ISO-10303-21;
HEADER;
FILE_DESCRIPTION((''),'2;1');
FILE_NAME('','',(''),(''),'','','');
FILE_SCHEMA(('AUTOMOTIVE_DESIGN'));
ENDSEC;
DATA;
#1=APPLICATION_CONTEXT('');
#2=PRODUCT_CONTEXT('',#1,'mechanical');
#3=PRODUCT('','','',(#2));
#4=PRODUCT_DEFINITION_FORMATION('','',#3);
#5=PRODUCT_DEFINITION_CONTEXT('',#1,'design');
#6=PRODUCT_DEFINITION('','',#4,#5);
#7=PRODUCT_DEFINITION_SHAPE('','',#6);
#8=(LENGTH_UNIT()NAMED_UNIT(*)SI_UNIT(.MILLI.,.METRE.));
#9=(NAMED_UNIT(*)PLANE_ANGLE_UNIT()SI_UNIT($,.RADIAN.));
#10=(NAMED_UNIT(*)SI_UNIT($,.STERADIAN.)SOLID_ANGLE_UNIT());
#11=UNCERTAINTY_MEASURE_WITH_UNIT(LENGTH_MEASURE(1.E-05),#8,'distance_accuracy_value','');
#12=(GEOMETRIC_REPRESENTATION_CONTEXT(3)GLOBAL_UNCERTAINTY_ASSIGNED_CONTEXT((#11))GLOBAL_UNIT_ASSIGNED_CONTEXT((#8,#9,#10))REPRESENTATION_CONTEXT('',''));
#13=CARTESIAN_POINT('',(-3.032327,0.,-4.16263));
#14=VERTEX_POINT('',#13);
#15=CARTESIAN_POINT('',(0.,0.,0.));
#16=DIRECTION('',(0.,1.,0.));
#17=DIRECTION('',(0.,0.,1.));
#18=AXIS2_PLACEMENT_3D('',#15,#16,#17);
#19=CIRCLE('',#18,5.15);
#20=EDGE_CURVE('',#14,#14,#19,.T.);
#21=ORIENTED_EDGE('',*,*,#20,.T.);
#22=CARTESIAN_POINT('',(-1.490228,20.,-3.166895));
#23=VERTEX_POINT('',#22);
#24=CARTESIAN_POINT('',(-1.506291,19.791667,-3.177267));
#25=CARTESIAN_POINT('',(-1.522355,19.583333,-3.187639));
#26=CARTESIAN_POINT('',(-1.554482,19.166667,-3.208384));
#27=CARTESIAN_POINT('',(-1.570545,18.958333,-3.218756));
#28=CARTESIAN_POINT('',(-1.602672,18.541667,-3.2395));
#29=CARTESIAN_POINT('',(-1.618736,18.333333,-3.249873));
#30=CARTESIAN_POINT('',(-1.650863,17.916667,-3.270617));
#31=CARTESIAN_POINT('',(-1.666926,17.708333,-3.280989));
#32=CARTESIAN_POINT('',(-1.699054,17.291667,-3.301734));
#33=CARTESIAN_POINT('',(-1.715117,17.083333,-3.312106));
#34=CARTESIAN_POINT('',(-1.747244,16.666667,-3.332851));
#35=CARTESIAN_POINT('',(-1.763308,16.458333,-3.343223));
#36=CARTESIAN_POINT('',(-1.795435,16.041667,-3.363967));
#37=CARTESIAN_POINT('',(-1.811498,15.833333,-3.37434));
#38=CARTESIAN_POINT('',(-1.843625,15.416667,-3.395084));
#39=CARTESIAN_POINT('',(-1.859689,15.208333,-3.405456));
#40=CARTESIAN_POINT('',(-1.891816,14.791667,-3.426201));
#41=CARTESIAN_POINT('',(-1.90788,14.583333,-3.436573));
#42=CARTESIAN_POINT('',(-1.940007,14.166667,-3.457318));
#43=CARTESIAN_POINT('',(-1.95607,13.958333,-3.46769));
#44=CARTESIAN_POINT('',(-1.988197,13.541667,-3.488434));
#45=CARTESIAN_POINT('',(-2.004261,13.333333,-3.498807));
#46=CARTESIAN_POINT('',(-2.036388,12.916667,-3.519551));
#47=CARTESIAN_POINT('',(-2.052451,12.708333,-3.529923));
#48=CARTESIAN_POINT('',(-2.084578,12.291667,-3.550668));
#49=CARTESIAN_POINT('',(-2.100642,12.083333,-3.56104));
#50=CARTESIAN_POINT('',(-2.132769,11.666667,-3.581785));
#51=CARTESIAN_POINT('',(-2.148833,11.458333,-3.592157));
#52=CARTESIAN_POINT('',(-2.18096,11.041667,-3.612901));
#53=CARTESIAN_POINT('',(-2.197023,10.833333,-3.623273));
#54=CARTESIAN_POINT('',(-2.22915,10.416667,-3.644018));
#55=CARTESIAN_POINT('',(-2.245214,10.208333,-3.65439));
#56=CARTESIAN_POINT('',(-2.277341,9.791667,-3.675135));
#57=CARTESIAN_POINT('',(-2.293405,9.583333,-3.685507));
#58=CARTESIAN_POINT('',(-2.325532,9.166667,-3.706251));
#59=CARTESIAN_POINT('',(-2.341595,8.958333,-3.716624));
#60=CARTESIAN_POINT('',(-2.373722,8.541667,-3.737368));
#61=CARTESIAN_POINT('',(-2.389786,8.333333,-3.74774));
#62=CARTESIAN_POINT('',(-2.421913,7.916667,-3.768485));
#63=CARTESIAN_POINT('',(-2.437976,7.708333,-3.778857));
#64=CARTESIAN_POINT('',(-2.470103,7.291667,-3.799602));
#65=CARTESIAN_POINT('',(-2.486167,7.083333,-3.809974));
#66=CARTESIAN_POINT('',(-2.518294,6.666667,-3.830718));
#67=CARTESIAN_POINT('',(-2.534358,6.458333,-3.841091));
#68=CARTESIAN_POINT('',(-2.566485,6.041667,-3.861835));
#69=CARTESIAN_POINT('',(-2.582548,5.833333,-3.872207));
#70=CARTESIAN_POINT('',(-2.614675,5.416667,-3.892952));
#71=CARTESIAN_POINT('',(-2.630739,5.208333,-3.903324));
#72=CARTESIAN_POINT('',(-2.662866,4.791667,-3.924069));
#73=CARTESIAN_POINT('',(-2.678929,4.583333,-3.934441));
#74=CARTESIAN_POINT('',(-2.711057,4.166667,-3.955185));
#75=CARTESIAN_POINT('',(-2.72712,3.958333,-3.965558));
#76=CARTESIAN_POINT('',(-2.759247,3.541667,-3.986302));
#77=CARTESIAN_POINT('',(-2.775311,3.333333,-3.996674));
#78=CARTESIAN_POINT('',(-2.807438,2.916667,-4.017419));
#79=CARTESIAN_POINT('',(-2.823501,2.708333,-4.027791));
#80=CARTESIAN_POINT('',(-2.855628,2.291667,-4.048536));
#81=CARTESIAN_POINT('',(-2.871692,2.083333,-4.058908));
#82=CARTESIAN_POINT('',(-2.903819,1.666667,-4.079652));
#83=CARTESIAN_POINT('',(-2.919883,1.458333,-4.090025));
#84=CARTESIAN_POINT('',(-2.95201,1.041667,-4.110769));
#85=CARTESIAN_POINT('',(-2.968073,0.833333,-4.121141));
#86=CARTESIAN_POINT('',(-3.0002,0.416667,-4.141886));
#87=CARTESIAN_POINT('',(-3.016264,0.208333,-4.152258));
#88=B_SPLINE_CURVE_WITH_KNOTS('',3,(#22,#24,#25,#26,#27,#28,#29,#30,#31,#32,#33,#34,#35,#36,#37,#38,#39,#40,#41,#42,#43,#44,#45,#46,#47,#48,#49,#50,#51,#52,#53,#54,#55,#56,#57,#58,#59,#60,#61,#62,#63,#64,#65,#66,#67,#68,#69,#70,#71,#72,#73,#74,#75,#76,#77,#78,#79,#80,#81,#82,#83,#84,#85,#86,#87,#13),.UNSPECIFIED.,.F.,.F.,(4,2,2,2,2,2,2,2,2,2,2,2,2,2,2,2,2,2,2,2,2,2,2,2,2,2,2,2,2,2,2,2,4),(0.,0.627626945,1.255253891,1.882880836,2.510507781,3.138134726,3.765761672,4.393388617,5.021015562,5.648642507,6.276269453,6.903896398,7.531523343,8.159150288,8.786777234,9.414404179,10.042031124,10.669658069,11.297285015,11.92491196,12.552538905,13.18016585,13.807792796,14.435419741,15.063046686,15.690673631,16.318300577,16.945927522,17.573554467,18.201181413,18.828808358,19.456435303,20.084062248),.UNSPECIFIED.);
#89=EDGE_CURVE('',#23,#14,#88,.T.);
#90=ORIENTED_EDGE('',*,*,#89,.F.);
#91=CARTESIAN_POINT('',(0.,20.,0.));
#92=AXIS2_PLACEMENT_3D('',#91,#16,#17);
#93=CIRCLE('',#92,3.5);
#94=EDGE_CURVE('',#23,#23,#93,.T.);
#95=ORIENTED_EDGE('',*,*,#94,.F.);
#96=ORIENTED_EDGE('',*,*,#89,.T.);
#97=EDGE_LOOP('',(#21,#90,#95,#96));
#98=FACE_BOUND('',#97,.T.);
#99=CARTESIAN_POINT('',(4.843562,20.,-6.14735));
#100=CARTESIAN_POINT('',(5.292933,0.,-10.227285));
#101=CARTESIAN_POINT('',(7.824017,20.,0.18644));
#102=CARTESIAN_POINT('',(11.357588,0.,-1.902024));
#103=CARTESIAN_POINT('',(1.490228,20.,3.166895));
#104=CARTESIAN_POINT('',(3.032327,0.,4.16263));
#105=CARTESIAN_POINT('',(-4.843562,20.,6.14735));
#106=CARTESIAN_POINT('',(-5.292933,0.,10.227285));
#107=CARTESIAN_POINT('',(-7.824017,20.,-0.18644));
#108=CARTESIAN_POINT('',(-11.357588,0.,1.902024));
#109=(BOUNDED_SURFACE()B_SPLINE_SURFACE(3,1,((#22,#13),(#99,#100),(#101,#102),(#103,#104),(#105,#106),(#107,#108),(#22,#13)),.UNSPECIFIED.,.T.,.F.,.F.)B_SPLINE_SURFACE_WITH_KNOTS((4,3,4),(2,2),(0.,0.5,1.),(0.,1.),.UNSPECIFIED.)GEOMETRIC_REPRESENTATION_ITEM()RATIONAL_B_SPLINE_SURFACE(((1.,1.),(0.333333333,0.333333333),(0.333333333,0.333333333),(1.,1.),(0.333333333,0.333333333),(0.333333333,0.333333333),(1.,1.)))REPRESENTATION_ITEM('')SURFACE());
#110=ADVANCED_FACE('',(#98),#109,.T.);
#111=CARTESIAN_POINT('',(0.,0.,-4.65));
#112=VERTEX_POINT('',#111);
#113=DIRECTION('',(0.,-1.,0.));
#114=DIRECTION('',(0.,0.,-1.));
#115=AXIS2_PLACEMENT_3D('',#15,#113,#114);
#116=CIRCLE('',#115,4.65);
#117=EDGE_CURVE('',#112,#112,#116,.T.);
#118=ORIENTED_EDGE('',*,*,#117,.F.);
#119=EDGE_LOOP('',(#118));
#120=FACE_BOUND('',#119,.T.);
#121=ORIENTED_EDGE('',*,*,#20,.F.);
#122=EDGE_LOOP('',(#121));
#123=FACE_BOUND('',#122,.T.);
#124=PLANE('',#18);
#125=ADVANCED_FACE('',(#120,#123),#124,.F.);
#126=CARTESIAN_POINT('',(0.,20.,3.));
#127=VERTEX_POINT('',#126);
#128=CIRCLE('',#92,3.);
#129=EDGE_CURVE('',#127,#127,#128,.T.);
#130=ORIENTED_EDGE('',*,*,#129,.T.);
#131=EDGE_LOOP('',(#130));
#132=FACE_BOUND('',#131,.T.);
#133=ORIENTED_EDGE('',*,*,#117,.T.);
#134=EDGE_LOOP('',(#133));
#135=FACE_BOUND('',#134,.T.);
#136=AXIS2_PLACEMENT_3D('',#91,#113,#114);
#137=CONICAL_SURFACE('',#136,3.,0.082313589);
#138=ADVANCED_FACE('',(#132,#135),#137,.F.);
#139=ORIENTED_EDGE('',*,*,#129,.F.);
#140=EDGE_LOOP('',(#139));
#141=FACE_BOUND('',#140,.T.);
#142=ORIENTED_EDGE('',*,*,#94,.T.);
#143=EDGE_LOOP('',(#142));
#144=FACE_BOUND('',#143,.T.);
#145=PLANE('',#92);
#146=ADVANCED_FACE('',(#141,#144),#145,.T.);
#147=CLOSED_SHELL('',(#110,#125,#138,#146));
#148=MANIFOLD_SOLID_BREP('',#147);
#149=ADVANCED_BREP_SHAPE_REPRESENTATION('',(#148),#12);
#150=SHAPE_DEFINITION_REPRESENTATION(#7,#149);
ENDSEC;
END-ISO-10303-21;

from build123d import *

# Parameters (mm, degrees)
SKETCH3_R = 3
SKETCH4_R = 4.65


with BuildPart() as part:
    # Loft1: read off the stored shape, not the designer's step
    # Loft1: loft between two sections, ruled curve by curve
    loft1_from = [
        Edge.make_bspline([(-1.49022752, 19.999999878, -3.166894684), (4.843561847, 19.999999878, -6.147349725), (7.824016888, 19.999999878, 0.186439643), (1.49022752, 19.999999878, 3.166894684), (-4.843561847, 19.999999878, 6.147349725), (-7.824016888, 19.999999878, -0.186439643), (-1.49022752, 19.999999878, -3.166894684)], [0, 0, 0, 0, 0.5, 0.5, 0.5, 1, 1, 1, 1], 3, [1, 0.333333333, 0.333333333, 1, 0.333333333, 0.333333333, 1]),
    ]
    loft1_to = [
        Edge.make_bspline([(-3.032327358, 0, -4.162630274), (5.29293319, 0, -10.227284989), (11.357587905, 0, -1.902024441), (3.032327358, 0, 4.162630274), (-5.29293319, 0, 10.227284989), (-11.357587905, 0, 1.902024441), (-3.032327358, 0, -4.162630274)], [0, 0, 0, 0, 0.5, 0.5, 0.5, 1, 1, 1, 1], 3, [1, 0.333333333, 0.333333333, 1, 0.333333333, 0.333333333, 1]),
    ]
    loft1 = Solid(Shell([*[Face.make_surface_from_curves(loft1_from[k], loft1_to[k]) for k in range(1)], Face(Wire(loft1_from)), Face(Wire(loft1_to))]))
    add(loft1)

    # Sketch3 → Cut-Loft1 section 0
    with BuildSketch(Plane(origin=(0, 19.999999878, 0), x_dir=(1, 0, 0), z_dir=(0, 1, 0))):
        Circle(SKETCH3_R)
    # Sketch4 → Cut-Loft1 section 1
    with BuildSketch(Plane.XZ):
        Circle(SKETCH4_R)
    loft(mode=Mode.SUBTRACT)


solid = part.part
